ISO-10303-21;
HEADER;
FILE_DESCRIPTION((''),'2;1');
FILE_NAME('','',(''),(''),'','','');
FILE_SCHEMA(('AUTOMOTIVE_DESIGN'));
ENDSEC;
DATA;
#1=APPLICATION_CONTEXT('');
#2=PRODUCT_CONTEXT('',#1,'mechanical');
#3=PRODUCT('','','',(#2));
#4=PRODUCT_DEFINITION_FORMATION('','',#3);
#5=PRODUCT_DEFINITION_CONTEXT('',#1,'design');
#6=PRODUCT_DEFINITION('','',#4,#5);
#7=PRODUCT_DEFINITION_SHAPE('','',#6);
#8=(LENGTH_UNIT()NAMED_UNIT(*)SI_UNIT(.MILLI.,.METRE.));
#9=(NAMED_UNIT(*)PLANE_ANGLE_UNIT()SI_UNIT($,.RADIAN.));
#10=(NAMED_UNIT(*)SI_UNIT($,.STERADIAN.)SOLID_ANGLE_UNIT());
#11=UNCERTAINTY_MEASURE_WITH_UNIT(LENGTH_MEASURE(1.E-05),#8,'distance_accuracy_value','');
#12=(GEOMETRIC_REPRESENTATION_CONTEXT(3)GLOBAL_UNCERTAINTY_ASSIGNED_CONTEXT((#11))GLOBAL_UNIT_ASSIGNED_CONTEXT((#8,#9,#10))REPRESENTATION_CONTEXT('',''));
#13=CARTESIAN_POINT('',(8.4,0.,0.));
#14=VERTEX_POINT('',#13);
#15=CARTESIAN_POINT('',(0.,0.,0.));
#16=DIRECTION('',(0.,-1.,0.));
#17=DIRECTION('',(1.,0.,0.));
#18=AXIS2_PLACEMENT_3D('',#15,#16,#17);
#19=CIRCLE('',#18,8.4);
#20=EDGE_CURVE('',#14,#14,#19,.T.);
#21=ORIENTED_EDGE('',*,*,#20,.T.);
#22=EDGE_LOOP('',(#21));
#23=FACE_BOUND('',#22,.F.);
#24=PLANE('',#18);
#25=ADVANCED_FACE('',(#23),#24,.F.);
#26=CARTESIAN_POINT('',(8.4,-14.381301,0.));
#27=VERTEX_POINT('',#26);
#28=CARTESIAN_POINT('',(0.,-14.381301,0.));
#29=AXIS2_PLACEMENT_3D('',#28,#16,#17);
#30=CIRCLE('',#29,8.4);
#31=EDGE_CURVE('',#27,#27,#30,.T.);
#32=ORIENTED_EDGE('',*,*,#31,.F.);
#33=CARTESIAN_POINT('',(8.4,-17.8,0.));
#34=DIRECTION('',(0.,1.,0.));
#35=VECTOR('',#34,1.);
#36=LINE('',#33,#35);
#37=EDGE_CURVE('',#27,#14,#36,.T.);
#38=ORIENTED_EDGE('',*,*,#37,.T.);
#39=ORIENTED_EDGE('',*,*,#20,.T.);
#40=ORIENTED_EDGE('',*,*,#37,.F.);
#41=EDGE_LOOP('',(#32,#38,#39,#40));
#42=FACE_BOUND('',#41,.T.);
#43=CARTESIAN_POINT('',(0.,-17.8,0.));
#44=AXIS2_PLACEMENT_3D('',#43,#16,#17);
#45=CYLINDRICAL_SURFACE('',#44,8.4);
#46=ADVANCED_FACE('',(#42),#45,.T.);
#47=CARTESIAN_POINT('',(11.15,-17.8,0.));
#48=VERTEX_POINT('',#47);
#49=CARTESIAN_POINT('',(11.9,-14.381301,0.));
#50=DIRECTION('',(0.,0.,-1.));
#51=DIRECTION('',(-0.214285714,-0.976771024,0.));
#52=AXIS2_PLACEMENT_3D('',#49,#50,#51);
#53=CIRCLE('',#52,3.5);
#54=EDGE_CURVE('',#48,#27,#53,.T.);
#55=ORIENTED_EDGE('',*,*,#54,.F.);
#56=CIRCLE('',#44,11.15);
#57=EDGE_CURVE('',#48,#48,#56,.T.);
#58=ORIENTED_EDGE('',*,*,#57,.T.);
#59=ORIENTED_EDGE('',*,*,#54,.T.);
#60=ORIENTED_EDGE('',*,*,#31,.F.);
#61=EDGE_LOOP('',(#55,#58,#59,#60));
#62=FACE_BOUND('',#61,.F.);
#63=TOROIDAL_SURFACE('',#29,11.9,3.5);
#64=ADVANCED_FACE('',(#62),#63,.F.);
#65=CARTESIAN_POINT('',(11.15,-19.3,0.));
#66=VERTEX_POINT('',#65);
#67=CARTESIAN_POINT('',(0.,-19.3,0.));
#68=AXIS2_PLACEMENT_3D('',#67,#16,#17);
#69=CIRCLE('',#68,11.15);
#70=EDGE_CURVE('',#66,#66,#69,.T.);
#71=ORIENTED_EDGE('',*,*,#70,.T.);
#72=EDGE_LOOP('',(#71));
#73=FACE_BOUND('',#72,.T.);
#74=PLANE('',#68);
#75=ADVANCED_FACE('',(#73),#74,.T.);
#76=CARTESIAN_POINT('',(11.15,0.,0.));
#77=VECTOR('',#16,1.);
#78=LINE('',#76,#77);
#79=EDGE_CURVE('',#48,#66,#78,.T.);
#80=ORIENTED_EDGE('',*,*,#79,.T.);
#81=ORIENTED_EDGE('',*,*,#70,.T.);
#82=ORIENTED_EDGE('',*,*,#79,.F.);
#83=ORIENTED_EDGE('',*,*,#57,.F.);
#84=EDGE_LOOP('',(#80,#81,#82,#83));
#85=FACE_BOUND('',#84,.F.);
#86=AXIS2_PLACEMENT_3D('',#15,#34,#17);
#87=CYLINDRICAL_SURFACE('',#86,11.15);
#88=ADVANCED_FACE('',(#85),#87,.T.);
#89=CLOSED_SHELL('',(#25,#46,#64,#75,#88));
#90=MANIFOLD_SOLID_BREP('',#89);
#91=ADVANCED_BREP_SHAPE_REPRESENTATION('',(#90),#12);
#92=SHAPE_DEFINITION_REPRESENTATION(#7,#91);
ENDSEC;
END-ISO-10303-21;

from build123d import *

# Parameters (mm, degrees)
F0_R     = 11.15
F1_DEPTH = 19.3
F3_START = -1.5
F2_R     = 11.15
F2_R_2   = 8.4
F3_DEPTH = 17.8


# Not quite as in the source:
# - a fillet or chamfer that OpenCascade refuses, or shapes differently, is made with other operations: its cross-section is extruded or revolved along the edge and cut away or added


with BuildPart() as f1:
    # F0 (on Front) → F1 (new body)
    with BuildSketch(Plane.XZ):
        Circle(F0_R)
    extrude(amount=F1_DEPTH)

    # F2 (on face) → F3 (cut)
    with BuildSketch(Plane.XZ.offset(19.3).offset(F3_START)):
        Circle(F2_R)
        Circle(F2_R_2, mode=Mode.SUBTRACT)
    extrude(amount=-F3_DEPTH, mode=Mode.SUBTRACT)

    # F4: fillet of radius 3.5 on 1 edges, made by hand

    # F4_s1 → F4_t2 (revolve)
    with BuildSketch(Plane.XY):
        with BuildLine():
            ThreePointArc((11.15, -17.8), (9.1728219713, -16.5750425141), (8.4, -14.3813014172))
            Line((8.4, -14.3813014172), (8.4, -17.8))
            Line((8.4, -17.8), (11.15, -17.8))
        make_face()
    revolve(axis=Axis((0, -17.8, 0), (0, -1, 0)))


solid = f1.part
